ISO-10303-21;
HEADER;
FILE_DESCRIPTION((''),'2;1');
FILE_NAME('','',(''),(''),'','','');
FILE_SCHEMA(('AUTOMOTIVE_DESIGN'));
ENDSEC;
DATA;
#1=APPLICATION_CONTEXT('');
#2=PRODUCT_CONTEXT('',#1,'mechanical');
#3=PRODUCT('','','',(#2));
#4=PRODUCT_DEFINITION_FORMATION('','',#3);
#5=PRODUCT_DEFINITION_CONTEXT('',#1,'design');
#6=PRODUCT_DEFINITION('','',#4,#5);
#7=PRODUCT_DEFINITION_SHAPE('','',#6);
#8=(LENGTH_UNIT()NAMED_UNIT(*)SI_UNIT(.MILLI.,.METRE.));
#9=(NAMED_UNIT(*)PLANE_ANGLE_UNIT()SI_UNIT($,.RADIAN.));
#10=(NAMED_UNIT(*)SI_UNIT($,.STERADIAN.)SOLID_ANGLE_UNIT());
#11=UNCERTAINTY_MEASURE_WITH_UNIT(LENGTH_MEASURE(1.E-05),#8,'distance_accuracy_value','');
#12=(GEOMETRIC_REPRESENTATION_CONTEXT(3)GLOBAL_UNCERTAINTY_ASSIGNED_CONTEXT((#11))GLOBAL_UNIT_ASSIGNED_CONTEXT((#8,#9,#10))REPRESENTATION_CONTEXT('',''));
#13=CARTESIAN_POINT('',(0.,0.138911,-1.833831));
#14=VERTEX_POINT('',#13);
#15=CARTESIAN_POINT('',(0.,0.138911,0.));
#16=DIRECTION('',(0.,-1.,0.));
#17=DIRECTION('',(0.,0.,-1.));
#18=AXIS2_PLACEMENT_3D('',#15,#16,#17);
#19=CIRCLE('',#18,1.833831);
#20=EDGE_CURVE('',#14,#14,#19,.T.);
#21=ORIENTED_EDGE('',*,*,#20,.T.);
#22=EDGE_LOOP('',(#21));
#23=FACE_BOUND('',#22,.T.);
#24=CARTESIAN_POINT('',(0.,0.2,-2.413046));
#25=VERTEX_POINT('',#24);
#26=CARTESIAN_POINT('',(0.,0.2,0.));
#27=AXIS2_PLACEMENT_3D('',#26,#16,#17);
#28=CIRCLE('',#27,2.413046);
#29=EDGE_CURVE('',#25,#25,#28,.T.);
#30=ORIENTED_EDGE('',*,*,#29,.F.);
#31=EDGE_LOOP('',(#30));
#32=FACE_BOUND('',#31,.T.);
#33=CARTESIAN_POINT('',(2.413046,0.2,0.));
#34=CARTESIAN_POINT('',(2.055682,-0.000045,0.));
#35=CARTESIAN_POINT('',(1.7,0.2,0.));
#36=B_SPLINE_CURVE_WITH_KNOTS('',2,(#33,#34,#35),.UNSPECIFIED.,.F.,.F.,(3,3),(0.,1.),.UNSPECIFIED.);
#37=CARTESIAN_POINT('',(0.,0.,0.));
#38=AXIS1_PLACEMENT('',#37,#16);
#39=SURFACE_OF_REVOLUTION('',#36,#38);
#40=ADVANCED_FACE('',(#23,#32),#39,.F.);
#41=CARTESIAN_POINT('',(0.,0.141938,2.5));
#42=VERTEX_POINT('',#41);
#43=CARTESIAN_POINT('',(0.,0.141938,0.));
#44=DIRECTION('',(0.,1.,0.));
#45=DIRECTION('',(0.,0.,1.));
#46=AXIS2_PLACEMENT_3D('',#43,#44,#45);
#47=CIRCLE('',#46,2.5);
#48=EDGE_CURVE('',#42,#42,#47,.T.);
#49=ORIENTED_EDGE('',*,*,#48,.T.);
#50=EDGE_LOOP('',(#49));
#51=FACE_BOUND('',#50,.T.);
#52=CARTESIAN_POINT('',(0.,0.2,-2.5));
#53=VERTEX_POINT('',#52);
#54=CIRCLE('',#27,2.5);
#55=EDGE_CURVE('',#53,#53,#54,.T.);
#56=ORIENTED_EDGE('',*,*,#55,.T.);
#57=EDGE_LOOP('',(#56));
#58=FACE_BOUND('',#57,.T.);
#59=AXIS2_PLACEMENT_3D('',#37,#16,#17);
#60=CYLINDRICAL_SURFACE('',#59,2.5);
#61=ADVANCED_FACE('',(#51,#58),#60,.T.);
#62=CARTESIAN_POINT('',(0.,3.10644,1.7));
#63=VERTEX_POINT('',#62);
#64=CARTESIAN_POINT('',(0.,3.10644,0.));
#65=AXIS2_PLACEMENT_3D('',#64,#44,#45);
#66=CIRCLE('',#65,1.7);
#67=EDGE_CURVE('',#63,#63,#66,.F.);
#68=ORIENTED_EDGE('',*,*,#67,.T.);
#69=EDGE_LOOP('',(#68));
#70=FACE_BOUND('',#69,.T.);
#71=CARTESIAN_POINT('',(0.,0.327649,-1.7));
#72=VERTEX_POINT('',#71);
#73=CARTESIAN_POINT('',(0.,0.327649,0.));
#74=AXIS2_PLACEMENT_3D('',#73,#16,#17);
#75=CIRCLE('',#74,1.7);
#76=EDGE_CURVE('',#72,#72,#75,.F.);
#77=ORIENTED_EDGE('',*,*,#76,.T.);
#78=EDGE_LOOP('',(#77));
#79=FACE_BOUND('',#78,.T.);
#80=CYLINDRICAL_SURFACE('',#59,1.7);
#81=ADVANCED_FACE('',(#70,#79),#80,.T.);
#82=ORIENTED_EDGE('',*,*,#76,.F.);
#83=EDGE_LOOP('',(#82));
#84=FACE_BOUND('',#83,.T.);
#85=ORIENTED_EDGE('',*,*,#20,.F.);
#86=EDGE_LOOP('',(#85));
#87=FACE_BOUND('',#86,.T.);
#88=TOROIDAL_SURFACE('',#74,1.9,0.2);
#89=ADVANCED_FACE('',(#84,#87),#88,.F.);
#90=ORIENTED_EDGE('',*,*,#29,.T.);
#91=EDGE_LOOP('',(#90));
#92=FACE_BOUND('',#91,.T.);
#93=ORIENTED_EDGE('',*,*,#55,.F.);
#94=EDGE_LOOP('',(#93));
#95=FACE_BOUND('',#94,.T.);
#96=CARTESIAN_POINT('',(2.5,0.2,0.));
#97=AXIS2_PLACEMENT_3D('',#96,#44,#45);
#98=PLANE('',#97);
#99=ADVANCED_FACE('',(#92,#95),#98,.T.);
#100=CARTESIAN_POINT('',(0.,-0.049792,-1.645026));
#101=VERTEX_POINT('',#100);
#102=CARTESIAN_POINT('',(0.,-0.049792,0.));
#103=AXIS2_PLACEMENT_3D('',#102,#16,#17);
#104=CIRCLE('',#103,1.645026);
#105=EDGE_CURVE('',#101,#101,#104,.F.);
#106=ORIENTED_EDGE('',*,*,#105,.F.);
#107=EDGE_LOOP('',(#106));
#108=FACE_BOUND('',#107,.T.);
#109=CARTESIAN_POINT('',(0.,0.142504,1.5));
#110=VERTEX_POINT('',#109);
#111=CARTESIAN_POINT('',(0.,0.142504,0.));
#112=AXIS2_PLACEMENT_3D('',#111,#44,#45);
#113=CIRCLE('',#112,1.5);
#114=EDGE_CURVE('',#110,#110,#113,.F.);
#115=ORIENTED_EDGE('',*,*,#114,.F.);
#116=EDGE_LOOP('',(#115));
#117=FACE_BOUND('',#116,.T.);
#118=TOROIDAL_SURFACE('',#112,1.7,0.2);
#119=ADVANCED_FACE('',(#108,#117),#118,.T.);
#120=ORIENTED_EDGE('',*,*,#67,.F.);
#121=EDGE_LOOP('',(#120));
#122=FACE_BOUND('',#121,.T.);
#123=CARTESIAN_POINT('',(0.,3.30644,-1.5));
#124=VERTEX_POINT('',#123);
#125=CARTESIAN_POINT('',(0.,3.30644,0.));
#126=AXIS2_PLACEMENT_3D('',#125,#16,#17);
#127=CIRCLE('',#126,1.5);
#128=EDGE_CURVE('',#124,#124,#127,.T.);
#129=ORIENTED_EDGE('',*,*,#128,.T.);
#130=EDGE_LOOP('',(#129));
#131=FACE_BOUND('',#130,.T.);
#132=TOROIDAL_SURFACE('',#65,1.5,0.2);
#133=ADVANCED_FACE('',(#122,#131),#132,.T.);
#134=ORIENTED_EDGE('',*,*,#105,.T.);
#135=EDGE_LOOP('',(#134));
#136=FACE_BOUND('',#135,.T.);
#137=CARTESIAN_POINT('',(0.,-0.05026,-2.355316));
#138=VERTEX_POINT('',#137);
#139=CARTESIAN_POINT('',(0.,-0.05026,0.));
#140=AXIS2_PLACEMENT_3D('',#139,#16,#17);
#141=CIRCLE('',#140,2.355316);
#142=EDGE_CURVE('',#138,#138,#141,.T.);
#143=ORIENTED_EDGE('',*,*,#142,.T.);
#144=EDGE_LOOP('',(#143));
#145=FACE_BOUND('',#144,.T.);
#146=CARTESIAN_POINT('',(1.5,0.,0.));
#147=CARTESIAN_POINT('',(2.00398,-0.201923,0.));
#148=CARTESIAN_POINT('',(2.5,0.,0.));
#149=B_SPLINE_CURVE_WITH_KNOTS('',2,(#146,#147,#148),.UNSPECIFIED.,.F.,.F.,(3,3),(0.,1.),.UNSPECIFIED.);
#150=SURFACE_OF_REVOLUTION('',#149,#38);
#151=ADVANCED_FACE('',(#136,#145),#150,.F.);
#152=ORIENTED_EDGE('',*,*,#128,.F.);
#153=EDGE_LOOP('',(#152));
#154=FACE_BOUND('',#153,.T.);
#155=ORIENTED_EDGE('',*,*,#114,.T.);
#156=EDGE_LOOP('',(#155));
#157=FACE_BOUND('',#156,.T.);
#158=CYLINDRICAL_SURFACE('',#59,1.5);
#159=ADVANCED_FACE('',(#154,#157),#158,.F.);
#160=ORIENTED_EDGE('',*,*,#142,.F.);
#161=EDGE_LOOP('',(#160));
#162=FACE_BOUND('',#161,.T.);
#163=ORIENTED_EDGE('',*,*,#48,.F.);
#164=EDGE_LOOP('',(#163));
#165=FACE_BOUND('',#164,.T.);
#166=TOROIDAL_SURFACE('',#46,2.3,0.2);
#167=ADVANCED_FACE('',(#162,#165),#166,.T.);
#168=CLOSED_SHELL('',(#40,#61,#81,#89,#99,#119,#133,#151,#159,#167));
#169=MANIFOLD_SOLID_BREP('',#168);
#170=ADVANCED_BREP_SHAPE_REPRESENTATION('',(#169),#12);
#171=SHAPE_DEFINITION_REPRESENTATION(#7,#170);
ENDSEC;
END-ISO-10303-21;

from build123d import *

# Parameters (mm, degrees)
FILLET1_R = 0.2


with BuildPart() as part:
    # Sketch2 → Revolve1 (revolve)
    with BuildSketch(Plane.XY, mode=Mode.PRIVATE) as revolve1_sk:
        with BuildLine():
            Line((2.5, 0), (2.5, 0.2))
            Line((2.5, 0.2), (2.413045567, 0.2))
            add(Edge.make_bspline(
                [(1.7, 0.2), (2.05568195, -4.4901e-05), (2.413045567, 0.2)],
                knots=[0, 0, 0, 1, 1, 1], degree=2))
            Line((1.7, 0.2), (1.7, 3.306439765))
            Line((1.7, 3.306439765), (1.5, 3.306439765))
            Line((1.5, 3.306439765), (1.5, 0))
            add(Edge.make_bspline(
                [(1.5, 0), (2.00398015, -0.201922677), (2.5, 0)],
                knots=[0, 0, 0, 1, 1, 1], degree=2))
        make_face()
    revolve(revolve1_sk.sketch.rotate(Axis((0, 0, 0), (0, 1, 0)), 90), axis=Axis((0, 0, 0), (0, 1, 0)))

    # Fillet1
    fillet1_edges = [part.edges().sort_by_distance(p)[0] for p in [
        (0, 0, 2.5),
        (0, 0.2, 1.7),
        (0, 3.306439765, 1.7),
        (0, 0, 1.5),
    ]]
    fillet(fillet1_edges, radius=FILLET1_R - 0.0001)  # a hair under: the kernel refuses the full size


solid = part.part
